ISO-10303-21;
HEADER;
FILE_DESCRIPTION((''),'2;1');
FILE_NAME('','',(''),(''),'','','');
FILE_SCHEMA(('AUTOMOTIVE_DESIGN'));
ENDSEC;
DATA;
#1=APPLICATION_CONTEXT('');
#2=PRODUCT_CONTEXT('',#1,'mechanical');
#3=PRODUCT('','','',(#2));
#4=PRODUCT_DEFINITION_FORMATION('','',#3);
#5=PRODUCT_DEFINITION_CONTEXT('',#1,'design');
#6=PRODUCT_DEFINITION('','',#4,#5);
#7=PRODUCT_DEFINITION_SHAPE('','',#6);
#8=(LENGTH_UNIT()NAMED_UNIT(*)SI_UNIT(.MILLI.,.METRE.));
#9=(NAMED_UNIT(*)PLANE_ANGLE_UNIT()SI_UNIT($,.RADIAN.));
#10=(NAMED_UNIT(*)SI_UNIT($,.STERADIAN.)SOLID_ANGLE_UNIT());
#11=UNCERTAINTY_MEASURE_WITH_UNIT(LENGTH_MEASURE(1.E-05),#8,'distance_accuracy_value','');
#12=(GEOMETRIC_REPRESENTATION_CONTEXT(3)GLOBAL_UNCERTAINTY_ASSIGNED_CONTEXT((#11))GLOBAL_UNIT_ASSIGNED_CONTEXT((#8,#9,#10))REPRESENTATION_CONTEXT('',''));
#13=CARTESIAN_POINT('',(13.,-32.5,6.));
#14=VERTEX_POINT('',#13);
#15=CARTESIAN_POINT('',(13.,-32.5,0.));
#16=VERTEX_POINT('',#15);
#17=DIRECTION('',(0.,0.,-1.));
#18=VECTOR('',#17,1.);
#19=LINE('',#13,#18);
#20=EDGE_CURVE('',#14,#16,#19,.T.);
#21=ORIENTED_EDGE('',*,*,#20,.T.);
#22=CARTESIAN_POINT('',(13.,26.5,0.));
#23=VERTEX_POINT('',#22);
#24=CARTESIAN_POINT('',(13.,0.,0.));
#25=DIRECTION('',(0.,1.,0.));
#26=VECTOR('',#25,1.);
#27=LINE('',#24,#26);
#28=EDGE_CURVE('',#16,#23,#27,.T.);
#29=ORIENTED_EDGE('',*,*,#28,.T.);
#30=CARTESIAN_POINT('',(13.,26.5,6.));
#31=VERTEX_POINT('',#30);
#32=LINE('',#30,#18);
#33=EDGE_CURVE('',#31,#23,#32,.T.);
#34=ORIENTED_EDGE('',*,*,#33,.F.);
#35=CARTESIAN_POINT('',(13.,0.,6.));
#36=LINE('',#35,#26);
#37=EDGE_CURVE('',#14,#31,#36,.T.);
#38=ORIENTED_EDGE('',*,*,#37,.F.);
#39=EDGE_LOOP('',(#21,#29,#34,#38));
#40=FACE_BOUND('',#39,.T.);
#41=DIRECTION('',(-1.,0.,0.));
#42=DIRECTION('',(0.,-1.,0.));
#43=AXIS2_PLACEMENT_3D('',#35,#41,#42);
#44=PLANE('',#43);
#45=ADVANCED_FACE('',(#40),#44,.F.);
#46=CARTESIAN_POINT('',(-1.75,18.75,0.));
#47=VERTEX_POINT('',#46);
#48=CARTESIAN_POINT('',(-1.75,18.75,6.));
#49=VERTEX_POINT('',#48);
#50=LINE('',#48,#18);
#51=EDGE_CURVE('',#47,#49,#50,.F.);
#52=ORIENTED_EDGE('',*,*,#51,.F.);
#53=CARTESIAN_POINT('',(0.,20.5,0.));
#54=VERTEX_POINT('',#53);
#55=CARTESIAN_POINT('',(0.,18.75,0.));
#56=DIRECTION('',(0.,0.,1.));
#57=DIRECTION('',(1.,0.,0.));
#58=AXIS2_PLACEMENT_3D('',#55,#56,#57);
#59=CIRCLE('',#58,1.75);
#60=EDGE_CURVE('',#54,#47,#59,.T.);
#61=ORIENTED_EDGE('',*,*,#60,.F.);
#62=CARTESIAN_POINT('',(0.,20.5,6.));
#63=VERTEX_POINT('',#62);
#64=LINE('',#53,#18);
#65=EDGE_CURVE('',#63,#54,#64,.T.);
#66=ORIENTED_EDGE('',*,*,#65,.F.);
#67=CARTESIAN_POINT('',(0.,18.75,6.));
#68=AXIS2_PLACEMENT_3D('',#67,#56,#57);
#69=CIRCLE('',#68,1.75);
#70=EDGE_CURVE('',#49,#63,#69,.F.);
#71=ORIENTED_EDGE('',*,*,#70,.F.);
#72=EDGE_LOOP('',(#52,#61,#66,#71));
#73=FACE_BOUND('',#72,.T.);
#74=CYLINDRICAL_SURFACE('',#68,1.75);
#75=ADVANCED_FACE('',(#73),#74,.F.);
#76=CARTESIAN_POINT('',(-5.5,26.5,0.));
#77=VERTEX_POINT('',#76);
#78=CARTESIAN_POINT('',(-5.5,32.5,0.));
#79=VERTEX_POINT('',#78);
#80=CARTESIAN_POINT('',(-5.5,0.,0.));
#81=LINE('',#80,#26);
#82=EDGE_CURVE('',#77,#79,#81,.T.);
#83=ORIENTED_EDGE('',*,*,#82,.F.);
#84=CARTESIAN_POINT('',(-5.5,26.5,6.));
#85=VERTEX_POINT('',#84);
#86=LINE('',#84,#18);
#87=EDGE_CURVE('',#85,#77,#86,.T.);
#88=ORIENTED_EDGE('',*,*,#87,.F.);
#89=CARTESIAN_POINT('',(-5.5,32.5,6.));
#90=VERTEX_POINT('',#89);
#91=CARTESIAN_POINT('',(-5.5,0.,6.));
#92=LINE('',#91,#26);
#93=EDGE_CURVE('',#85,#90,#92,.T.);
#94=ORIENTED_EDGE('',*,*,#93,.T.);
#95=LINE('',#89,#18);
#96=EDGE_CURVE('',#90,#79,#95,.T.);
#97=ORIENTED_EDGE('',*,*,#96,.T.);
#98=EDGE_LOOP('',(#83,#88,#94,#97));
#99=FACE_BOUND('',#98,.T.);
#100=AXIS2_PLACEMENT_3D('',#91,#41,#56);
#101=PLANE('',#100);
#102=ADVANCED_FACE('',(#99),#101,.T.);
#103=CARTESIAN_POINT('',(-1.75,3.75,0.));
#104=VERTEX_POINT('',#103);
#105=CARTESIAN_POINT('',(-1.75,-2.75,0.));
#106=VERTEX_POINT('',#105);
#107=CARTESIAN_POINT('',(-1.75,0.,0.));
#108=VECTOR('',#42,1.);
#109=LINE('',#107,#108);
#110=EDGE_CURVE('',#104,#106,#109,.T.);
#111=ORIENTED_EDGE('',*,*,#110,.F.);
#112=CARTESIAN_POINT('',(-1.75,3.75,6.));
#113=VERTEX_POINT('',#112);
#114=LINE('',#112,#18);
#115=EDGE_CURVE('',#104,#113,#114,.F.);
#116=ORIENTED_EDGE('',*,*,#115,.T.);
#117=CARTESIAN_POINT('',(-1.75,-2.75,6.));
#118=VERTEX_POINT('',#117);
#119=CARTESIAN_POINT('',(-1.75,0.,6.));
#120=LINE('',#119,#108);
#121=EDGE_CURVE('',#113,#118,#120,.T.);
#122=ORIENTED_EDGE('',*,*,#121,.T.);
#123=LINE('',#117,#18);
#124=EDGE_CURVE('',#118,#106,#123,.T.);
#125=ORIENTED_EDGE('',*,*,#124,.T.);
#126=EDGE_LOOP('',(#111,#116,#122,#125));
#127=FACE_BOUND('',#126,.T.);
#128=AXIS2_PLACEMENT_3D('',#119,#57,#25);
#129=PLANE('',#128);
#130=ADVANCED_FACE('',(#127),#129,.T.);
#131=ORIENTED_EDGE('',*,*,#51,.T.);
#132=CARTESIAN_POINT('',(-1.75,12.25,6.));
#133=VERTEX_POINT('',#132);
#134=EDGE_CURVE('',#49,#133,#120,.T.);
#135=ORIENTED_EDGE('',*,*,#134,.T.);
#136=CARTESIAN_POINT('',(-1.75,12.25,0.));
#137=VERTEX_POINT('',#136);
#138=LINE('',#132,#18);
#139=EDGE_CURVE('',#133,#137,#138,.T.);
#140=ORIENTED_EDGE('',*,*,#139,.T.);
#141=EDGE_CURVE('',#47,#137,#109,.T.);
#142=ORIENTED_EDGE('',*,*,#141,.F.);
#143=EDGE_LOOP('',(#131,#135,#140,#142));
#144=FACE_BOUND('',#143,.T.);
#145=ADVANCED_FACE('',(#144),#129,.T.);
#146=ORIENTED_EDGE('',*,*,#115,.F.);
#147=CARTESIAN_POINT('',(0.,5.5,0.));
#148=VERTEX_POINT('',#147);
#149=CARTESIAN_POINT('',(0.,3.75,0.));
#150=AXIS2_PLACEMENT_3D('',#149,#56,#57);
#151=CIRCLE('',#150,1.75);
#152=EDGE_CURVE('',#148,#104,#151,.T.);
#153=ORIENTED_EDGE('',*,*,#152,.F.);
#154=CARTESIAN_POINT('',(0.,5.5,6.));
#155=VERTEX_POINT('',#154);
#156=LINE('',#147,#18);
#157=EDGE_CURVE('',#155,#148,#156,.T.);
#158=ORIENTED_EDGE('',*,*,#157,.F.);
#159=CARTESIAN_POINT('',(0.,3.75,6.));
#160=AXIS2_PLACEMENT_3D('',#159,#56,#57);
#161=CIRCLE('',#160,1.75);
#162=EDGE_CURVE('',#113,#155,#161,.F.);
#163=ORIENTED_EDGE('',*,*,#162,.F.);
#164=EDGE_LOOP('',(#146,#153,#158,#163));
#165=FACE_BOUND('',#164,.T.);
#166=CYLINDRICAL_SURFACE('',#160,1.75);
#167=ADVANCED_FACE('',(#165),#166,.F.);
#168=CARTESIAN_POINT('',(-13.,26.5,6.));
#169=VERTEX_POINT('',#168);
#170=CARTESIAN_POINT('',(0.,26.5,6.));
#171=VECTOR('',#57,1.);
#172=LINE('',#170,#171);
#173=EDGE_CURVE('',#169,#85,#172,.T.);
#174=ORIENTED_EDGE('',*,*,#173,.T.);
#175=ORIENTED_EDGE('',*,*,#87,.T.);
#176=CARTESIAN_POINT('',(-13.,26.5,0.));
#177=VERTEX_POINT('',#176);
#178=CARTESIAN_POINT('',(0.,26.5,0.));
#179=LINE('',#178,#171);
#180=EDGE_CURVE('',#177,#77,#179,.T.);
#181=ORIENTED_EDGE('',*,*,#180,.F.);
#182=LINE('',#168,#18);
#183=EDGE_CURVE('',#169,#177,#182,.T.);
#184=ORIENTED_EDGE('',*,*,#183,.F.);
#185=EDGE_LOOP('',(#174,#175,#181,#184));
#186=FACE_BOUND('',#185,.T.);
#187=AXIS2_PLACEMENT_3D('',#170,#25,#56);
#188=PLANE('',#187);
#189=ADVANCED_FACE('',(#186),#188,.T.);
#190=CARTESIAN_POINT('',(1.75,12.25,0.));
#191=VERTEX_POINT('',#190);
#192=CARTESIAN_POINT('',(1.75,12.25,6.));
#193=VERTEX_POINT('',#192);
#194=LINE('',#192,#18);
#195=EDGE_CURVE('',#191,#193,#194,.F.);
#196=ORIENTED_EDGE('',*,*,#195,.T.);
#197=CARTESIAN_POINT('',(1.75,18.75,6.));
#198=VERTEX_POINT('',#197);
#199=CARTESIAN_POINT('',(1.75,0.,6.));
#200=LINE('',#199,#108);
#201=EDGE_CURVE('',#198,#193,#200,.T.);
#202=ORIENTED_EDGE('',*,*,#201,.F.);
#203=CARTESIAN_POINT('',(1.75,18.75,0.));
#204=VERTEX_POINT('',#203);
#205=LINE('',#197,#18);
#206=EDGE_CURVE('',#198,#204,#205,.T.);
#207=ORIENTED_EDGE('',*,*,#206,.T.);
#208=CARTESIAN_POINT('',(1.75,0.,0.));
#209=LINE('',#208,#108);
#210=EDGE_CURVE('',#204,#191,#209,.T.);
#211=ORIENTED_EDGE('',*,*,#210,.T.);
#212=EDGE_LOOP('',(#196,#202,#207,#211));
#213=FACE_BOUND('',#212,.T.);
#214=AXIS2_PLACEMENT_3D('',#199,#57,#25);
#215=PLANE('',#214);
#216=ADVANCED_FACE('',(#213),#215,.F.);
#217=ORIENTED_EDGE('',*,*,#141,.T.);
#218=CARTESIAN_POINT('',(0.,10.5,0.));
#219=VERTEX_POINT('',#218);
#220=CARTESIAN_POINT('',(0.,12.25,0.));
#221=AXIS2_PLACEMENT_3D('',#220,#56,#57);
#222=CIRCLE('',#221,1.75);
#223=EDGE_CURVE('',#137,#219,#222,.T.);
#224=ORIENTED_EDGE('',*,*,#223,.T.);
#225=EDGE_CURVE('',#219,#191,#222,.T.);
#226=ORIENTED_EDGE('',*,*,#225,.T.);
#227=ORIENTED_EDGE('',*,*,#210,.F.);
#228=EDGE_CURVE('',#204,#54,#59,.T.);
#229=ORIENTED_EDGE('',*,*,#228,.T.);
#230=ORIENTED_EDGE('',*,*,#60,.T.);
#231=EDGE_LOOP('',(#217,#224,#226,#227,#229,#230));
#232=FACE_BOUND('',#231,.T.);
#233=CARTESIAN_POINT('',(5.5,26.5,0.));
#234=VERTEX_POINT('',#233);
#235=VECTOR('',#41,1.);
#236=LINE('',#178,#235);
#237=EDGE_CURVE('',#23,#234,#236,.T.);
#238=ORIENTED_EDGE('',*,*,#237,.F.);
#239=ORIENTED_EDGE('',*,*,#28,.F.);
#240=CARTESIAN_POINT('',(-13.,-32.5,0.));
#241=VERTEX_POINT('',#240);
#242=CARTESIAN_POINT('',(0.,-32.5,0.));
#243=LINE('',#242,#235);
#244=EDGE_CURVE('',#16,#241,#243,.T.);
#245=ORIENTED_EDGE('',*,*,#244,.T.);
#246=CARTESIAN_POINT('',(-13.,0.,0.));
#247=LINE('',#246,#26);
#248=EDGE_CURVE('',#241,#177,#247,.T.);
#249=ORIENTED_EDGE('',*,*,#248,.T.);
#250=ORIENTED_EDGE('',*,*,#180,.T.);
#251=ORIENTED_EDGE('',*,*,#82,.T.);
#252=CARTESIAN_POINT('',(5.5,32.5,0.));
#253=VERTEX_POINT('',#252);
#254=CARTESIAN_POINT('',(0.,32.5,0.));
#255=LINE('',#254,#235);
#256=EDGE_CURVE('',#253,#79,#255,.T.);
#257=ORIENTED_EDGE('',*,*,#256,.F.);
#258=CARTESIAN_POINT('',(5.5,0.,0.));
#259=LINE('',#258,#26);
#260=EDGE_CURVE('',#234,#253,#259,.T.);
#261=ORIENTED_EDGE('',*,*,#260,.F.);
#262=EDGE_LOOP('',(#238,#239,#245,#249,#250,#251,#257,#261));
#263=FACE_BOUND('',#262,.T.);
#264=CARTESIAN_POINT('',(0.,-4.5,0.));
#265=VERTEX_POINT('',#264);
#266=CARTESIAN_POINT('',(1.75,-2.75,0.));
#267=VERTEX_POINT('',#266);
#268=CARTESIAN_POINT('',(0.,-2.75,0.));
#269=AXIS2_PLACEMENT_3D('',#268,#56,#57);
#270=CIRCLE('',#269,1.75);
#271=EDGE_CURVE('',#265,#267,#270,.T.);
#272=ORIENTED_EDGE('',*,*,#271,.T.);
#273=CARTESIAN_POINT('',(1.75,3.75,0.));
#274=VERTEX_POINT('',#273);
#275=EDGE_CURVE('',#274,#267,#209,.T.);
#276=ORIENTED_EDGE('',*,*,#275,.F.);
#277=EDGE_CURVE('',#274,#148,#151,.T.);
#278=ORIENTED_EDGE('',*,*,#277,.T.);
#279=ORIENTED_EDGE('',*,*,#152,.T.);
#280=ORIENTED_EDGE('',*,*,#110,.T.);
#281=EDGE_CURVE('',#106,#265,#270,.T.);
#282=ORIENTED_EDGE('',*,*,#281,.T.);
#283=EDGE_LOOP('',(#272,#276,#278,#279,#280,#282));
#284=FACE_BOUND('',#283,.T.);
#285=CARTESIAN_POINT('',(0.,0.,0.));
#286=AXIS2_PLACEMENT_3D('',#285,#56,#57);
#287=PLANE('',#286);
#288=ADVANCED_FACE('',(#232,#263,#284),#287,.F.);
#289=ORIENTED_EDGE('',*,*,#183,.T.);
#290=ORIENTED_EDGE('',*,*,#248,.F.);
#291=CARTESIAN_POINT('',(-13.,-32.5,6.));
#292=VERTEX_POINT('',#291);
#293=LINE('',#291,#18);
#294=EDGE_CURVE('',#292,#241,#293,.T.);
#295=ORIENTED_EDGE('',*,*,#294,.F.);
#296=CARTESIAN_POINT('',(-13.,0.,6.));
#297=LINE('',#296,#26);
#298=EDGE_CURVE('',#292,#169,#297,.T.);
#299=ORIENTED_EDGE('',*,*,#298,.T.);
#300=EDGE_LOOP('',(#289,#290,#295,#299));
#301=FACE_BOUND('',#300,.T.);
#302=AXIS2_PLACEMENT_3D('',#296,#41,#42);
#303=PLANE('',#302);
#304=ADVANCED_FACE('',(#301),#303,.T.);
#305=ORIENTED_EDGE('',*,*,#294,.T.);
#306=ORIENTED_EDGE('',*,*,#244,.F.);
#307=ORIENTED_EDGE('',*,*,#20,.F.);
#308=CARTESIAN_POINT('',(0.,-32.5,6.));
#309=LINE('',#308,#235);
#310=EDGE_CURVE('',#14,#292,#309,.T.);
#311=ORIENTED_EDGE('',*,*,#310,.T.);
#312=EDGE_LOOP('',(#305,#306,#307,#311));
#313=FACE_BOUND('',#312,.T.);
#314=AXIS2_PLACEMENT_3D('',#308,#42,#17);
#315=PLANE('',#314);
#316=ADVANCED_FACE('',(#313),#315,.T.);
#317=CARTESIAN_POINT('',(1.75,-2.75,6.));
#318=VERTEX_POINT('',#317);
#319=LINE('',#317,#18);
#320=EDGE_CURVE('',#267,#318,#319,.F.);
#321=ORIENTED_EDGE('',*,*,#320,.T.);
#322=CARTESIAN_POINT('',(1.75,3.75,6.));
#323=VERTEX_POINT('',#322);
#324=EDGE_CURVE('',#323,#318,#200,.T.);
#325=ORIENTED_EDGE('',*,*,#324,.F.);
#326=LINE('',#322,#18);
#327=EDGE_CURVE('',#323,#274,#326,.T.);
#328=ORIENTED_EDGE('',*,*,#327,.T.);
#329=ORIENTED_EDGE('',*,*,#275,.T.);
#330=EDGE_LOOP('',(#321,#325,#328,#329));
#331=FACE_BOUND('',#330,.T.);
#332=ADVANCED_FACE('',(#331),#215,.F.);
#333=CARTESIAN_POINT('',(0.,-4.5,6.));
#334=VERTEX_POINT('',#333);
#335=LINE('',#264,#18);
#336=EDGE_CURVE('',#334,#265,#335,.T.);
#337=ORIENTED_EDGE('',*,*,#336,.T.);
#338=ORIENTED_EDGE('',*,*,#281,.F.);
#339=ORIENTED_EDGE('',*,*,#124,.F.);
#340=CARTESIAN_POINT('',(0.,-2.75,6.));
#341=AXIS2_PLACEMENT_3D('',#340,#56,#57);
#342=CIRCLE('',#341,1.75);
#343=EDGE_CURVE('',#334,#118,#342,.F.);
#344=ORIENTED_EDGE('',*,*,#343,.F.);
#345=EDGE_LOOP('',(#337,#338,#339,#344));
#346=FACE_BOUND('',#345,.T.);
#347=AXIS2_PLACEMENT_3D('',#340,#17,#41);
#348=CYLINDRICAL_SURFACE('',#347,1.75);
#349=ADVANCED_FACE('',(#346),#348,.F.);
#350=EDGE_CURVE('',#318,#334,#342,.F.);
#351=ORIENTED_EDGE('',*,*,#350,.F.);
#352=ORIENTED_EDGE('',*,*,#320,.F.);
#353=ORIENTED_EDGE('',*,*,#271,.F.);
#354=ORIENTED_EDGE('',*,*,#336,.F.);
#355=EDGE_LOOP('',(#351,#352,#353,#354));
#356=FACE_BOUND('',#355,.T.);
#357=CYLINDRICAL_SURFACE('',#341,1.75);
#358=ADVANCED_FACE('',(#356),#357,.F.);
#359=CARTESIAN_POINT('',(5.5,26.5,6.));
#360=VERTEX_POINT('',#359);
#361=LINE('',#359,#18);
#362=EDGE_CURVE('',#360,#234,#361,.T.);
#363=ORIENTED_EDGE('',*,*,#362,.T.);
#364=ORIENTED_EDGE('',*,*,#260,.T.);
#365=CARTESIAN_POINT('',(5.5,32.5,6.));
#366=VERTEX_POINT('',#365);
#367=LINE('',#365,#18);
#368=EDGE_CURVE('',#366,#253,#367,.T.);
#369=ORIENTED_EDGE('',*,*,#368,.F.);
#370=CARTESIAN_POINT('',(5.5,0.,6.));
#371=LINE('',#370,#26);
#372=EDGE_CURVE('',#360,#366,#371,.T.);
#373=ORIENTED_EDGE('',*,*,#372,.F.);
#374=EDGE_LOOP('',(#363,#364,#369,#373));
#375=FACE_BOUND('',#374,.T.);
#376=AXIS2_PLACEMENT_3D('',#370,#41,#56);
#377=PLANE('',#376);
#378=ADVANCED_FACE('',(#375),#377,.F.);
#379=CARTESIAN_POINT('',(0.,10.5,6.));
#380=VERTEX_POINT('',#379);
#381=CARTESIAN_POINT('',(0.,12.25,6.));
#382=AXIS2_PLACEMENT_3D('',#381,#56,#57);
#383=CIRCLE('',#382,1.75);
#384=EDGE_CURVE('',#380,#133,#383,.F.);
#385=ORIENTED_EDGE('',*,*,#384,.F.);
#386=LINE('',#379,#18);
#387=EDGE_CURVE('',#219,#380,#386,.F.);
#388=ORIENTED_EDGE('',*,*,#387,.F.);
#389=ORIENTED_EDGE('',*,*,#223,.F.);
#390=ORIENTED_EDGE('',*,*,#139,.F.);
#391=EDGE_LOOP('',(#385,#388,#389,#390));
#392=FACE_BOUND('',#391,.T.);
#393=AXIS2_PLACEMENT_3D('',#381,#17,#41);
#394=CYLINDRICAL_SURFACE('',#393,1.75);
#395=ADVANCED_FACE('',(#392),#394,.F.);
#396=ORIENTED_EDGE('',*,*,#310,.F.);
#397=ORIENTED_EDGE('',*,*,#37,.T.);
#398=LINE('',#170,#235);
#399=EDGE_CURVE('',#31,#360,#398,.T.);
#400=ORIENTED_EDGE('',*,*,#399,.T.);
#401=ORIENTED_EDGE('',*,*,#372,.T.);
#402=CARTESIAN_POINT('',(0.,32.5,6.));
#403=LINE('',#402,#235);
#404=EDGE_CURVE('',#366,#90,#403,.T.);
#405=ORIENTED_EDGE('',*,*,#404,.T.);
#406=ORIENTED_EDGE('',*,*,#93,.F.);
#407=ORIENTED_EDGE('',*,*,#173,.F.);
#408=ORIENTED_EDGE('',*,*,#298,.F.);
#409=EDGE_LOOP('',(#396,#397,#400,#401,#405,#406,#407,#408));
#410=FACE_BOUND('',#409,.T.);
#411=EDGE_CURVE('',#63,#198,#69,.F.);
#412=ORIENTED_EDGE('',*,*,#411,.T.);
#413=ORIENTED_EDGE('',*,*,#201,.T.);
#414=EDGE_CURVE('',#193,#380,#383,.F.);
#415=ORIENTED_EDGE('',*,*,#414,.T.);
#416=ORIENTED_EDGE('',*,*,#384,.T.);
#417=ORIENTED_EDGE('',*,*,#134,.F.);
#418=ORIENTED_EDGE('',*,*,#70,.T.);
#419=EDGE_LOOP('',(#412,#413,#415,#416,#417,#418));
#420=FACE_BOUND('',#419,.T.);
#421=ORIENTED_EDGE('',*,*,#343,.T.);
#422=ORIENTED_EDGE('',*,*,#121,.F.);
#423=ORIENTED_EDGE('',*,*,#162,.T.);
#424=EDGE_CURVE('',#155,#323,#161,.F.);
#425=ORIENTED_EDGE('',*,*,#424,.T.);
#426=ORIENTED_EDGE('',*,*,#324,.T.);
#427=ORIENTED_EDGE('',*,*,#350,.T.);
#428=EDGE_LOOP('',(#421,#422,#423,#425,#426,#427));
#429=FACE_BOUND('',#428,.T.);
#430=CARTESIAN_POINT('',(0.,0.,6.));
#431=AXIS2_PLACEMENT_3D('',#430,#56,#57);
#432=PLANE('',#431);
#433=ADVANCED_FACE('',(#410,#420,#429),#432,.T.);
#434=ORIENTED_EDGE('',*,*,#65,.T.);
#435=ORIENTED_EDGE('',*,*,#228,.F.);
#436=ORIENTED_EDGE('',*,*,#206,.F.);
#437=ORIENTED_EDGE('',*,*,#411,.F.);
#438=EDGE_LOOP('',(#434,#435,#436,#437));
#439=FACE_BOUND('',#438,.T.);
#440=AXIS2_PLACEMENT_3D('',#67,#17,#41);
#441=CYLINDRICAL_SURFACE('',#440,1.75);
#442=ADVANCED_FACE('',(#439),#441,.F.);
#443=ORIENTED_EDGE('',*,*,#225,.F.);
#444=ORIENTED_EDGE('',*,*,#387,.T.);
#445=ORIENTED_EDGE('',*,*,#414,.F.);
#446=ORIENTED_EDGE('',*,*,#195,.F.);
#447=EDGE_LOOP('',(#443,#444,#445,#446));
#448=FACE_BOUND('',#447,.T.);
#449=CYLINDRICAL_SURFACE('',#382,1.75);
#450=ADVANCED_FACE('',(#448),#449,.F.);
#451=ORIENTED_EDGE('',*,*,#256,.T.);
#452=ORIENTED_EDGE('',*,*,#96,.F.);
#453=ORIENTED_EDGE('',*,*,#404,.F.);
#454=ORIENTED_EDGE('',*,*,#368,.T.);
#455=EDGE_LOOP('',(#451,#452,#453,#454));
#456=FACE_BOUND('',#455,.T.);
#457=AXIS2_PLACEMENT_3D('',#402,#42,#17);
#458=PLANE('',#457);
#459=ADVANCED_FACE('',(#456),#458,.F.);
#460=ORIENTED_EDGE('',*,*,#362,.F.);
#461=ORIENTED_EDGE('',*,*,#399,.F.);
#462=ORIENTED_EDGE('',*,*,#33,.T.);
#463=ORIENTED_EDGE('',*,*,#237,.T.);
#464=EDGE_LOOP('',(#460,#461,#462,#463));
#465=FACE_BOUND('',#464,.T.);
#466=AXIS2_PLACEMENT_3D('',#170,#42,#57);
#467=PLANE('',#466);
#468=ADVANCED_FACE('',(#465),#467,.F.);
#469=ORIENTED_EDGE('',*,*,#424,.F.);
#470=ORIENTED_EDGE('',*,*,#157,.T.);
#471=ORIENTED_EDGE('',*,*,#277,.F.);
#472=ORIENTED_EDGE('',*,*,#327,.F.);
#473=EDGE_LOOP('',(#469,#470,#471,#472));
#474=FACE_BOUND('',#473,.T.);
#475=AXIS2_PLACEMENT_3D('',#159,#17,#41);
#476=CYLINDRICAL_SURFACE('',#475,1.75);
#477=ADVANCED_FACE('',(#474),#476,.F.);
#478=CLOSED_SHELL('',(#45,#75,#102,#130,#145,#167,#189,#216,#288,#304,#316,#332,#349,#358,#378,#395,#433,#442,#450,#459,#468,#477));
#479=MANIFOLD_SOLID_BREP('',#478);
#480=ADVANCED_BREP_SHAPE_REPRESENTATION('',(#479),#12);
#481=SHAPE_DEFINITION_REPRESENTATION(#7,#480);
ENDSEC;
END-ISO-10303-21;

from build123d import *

# Parameters (mm, degrees)
ESBO_O1_W                = 3.5
ESBO_O1_H                = 10
RESSALTO_EXTRUS_O1_DEPTH = 6
FILETE1_R                = 1.75


with BuildPart() as part:
    # Esboço1 → Ressalto-extrusão1 (new body)
    with BuildSketch(Plane.XY):
        Polygon((5.5, 32.5), (0, 32.5), (-5.5, 32.5), (-5.5, 26.5), (-13, 26.5), (-13, -32.5), (13, -32.5), (13, 26.5), (5.5, 26.5), align=None)
        with Locations((0, 15.5)):
            Rectangle(ESBO_O1_W, ESBO_O1_H, mode=Mode.SUBTRACT)
        with Locations((0, 0.5)):
            Rectangle(ESBO_O1_W, ESBO_O1_H, mode=Mode.SUBTRACT)
    extrude(amount=RESSALTO_EXTRUS_O1_DEPTH)

    # Filete1
    filete1_edges = [part.edges().sort_by_distance(p)[0] for p in [
        (-1.75, -4.5, 3),
        (1.75, -4.5, 3),
        (1.75, 5.5, 3),
        (-1.75, 5.5, 3),
        (1.75, 10.5, 3),
        (-1.75, 10.5, 3),
        (1.75, 20.5, 3),
        (-1.75, 20.5, 3),
    ]]
    fillet(filete1_edges, radius=FILETE1_R - 0.0001)  # a hair under: the kernel refuses the full size


solid = part.part
